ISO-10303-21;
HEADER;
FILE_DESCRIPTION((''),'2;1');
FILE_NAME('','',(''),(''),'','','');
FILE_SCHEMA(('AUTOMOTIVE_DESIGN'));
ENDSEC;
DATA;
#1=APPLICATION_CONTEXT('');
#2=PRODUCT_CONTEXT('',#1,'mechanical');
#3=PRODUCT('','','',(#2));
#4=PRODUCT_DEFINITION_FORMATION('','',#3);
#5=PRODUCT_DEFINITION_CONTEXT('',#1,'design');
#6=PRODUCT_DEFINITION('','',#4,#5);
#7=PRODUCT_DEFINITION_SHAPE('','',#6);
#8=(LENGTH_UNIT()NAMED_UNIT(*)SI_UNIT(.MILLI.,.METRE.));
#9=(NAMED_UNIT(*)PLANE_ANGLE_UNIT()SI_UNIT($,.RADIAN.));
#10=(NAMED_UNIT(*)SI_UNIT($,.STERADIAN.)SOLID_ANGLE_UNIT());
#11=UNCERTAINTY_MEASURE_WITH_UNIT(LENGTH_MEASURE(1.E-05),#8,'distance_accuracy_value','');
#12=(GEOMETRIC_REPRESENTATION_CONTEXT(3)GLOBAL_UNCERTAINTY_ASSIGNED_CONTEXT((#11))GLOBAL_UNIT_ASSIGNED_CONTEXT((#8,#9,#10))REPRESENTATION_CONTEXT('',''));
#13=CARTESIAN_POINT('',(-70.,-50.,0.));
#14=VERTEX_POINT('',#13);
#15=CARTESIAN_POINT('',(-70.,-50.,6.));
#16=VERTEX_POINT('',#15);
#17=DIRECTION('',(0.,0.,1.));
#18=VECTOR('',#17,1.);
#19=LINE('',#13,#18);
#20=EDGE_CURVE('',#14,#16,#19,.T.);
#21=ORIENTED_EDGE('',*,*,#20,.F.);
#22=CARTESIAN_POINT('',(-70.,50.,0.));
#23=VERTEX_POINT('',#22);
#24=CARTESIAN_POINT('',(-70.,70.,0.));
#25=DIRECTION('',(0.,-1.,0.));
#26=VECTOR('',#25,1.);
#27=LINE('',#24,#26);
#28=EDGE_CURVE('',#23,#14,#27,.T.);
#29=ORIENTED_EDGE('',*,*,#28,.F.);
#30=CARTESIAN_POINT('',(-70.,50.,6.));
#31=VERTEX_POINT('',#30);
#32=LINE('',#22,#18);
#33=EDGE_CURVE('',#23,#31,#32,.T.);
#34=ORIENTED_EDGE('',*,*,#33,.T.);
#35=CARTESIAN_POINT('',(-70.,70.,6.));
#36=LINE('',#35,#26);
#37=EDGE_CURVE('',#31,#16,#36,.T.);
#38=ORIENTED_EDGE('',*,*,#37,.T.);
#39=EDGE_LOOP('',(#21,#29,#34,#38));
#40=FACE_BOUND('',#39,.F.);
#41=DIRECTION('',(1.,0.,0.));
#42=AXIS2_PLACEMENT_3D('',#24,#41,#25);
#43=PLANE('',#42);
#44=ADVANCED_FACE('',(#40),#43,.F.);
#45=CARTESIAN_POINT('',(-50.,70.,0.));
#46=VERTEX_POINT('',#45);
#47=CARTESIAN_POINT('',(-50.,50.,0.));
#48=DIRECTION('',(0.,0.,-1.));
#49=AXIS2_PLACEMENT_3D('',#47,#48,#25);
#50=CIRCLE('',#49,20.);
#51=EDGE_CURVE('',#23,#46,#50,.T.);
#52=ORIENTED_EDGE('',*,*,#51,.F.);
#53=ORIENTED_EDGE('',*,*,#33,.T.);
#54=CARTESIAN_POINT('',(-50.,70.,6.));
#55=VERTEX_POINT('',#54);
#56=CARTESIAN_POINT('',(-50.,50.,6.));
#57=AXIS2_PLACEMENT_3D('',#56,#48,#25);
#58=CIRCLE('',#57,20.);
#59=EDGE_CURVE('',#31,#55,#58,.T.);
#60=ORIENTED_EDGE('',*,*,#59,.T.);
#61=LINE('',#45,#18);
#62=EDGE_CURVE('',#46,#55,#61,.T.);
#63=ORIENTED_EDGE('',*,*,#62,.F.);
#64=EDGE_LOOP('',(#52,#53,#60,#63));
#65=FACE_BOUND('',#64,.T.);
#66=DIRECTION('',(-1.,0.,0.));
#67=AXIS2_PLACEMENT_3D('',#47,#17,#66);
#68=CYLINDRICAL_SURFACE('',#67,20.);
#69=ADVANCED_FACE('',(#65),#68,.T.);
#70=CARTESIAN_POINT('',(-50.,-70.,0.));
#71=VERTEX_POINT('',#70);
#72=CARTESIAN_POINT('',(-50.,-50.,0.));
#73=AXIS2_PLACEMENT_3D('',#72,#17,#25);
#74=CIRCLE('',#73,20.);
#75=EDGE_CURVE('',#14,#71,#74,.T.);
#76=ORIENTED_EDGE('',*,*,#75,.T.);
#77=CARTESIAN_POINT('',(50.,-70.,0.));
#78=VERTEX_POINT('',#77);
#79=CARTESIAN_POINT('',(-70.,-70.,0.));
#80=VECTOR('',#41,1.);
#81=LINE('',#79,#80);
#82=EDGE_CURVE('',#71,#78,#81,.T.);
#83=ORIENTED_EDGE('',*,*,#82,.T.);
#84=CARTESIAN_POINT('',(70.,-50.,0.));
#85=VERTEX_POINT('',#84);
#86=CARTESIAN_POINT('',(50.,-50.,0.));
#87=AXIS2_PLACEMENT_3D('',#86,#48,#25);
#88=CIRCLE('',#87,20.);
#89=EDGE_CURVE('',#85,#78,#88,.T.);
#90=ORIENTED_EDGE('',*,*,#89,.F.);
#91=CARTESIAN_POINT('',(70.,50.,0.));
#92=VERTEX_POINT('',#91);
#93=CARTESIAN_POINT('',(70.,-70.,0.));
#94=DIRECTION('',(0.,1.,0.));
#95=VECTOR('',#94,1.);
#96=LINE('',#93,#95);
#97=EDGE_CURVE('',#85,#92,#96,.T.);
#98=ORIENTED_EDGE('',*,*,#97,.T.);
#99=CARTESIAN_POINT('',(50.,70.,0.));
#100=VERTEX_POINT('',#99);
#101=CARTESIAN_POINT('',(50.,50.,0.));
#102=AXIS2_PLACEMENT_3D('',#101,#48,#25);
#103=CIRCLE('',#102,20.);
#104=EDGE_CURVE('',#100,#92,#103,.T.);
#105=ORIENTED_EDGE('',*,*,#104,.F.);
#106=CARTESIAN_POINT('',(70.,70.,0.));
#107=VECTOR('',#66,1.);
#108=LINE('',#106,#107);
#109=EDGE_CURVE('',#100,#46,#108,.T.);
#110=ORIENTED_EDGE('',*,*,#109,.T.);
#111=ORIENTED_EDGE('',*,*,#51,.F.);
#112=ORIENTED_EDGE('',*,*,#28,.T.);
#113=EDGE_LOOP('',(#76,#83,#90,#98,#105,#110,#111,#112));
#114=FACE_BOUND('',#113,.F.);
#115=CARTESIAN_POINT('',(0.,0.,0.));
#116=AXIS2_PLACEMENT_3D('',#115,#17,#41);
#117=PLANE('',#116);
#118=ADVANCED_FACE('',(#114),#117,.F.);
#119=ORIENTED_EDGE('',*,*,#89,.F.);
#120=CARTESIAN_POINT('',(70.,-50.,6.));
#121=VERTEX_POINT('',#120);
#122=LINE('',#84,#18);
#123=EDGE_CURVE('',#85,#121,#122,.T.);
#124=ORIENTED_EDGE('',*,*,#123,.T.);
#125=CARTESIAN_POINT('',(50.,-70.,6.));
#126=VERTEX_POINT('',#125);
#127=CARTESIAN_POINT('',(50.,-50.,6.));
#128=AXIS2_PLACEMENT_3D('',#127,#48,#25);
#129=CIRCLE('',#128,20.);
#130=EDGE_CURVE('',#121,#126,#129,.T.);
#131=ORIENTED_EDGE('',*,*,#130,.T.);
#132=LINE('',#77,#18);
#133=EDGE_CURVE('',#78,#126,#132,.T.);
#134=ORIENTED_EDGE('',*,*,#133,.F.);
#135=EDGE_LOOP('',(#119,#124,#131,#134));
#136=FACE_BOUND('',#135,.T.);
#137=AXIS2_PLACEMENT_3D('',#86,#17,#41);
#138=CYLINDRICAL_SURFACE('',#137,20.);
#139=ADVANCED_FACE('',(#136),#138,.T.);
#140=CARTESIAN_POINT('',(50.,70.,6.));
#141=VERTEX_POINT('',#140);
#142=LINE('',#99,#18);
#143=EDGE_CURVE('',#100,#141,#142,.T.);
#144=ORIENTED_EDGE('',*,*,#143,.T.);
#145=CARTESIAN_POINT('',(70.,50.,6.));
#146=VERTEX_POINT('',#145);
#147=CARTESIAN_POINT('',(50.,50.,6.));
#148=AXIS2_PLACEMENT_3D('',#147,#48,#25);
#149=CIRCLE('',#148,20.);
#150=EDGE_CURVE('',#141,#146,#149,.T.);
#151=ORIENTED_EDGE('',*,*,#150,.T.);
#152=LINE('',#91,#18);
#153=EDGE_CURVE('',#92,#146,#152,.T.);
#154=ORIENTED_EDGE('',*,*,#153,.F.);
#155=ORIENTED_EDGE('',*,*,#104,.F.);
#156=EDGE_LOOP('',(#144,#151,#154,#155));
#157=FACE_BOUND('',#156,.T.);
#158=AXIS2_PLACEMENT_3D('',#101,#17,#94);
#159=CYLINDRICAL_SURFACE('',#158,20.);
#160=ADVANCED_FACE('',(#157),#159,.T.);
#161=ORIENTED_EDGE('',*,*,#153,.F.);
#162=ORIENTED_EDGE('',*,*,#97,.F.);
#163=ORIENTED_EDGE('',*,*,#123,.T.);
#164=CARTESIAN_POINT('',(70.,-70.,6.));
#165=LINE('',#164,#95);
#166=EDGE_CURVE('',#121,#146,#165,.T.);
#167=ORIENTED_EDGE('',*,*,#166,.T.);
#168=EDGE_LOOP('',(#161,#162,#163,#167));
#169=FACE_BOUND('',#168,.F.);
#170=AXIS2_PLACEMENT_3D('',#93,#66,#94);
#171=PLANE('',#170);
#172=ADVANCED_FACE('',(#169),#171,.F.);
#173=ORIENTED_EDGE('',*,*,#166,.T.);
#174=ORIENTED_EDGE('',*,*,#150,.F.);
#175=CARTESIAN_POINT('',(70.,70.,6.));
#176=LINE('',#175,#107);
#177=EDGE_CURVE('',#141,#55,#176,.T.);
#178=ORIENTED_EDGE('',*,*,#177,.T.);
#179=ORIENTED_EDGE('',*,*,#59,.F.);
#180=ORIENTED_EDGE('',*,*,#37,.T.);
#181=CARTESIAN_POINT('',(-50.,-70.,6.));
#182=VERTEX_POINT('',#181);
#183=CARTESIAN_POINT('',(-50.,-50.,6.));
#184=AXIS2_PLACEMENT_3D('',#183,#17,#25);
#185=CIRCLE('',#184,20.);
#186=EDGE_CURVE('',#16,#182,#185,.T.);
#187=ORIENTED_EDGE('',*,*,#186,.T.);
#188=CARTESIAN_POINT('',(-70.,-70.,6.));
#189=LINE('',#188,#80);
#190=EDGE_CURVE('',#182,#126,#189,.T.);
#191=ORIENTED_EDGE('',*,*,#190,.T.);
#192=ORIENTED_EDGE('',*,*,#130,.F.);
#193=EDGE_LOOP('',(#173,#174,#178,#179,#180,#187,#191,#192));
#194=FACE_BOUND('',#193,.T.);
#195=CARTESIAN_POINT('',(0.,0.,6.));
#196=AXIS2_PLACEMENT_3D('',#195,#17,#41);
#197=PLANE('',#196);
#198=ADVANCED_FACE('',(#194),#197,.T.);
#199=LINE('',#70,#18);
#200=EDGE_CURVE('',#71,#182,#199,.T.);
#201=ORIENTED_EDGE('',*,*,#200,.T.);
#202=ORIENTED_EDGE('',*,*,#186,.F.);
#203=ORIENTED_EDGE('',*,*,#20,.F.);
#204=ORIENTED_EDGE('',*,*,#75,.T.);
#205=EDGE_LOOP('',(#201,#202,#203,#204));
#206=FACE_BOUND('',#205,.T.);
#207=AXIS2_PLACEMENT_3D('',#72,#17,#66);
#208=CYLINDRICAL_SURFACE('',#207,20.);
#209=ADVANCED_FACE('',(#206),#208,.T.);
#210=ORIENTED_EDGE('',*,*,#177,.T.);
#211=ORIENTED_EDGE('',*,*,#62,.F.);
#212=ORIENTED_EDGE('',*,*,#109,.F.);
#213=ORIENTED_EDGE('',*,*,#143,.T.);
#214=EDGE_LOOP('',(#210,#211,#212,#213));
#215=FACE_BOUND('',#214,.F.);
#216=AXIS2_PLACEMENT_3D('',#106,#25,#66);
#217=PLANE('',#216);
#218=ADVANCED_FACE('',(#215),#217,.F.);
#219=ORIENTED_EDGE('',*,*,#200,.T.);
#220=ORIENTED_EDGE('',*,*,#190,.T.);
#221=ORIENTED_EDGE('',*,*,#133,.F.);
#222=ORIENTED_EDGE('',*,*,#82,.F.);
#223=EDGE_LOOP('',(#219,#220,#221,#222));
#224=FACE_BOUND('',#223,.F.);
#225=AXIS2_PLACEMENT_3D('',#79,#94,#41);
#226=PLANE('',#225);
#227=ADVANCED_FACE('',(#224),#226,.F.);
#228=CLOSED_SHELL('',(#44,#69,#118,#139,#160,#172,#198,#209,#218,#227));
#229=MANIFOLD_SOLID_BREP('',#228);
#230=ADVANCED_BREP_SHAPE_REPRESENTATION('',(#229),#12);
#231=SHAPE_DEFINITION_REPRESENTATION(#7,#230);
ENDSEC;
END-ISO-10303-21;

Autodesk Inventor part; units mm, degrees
ref_plane "YZ Plane" through (0, 0, 0) normal (1, 0, 0) x (0, 1, 0)
ref_plane "XZ Plane" through (0, 0, 0) normal (0, 1, 0) x (-1, 0, 0)
ref_plane "XY Plane" through (0, 0, 0) normal (0, 0, 1) x (1, 0, 0)
sketch "Sketch1" plane through (0, 0, 0) normal (0, 0, 1) x (1, 0, 0)
  line L0 (-70, -70) -> (70, -70)
  line L1 (70, -70) -> (70, 70)
  line L2 (70, 70) -> (-70, 70)
  line L3 (-70, 70) -> (-70, -70)
  line L4 (-70, -70) -> (70, 70) construction
  line L5 (70, -70) -> (-70, 70) construction
  point P0 (0, 0)
  dimension "d0" = 140
  dimension "d1" = 140
extrude "Plate1" add sketch "Sketch1" along normal blind 6
fillet "Corner Round1" radius 20 4 edges at (70, -70, 3) (-70, -70, 3) (-70, 70, 3) (70, 70, 3)
equation "\"d0\" = d1"
equation "\"d2\" = Thickness"
equation "\"BendReliefWidth\" = Thickness"
equation "\"BendReliefDepth\" = 0.5 * Thickness"
equation "\"CornerReliefSize\" = 4 * Thickness"
equation "\"MinimumRemnant\" = 2 * Thickness"
equation "\"TransitionRadius\" = BendRadius"
equation "\"JacobiRadiusSize\" = BendRadius"
equation "\"GapSize\" = Thickness"
equation "\"Thickness\" = 6"
equation "\"BendRadius\" = 5"
properties part number "PNS 1694 leg plate for filter" material "Stainless Steel"
